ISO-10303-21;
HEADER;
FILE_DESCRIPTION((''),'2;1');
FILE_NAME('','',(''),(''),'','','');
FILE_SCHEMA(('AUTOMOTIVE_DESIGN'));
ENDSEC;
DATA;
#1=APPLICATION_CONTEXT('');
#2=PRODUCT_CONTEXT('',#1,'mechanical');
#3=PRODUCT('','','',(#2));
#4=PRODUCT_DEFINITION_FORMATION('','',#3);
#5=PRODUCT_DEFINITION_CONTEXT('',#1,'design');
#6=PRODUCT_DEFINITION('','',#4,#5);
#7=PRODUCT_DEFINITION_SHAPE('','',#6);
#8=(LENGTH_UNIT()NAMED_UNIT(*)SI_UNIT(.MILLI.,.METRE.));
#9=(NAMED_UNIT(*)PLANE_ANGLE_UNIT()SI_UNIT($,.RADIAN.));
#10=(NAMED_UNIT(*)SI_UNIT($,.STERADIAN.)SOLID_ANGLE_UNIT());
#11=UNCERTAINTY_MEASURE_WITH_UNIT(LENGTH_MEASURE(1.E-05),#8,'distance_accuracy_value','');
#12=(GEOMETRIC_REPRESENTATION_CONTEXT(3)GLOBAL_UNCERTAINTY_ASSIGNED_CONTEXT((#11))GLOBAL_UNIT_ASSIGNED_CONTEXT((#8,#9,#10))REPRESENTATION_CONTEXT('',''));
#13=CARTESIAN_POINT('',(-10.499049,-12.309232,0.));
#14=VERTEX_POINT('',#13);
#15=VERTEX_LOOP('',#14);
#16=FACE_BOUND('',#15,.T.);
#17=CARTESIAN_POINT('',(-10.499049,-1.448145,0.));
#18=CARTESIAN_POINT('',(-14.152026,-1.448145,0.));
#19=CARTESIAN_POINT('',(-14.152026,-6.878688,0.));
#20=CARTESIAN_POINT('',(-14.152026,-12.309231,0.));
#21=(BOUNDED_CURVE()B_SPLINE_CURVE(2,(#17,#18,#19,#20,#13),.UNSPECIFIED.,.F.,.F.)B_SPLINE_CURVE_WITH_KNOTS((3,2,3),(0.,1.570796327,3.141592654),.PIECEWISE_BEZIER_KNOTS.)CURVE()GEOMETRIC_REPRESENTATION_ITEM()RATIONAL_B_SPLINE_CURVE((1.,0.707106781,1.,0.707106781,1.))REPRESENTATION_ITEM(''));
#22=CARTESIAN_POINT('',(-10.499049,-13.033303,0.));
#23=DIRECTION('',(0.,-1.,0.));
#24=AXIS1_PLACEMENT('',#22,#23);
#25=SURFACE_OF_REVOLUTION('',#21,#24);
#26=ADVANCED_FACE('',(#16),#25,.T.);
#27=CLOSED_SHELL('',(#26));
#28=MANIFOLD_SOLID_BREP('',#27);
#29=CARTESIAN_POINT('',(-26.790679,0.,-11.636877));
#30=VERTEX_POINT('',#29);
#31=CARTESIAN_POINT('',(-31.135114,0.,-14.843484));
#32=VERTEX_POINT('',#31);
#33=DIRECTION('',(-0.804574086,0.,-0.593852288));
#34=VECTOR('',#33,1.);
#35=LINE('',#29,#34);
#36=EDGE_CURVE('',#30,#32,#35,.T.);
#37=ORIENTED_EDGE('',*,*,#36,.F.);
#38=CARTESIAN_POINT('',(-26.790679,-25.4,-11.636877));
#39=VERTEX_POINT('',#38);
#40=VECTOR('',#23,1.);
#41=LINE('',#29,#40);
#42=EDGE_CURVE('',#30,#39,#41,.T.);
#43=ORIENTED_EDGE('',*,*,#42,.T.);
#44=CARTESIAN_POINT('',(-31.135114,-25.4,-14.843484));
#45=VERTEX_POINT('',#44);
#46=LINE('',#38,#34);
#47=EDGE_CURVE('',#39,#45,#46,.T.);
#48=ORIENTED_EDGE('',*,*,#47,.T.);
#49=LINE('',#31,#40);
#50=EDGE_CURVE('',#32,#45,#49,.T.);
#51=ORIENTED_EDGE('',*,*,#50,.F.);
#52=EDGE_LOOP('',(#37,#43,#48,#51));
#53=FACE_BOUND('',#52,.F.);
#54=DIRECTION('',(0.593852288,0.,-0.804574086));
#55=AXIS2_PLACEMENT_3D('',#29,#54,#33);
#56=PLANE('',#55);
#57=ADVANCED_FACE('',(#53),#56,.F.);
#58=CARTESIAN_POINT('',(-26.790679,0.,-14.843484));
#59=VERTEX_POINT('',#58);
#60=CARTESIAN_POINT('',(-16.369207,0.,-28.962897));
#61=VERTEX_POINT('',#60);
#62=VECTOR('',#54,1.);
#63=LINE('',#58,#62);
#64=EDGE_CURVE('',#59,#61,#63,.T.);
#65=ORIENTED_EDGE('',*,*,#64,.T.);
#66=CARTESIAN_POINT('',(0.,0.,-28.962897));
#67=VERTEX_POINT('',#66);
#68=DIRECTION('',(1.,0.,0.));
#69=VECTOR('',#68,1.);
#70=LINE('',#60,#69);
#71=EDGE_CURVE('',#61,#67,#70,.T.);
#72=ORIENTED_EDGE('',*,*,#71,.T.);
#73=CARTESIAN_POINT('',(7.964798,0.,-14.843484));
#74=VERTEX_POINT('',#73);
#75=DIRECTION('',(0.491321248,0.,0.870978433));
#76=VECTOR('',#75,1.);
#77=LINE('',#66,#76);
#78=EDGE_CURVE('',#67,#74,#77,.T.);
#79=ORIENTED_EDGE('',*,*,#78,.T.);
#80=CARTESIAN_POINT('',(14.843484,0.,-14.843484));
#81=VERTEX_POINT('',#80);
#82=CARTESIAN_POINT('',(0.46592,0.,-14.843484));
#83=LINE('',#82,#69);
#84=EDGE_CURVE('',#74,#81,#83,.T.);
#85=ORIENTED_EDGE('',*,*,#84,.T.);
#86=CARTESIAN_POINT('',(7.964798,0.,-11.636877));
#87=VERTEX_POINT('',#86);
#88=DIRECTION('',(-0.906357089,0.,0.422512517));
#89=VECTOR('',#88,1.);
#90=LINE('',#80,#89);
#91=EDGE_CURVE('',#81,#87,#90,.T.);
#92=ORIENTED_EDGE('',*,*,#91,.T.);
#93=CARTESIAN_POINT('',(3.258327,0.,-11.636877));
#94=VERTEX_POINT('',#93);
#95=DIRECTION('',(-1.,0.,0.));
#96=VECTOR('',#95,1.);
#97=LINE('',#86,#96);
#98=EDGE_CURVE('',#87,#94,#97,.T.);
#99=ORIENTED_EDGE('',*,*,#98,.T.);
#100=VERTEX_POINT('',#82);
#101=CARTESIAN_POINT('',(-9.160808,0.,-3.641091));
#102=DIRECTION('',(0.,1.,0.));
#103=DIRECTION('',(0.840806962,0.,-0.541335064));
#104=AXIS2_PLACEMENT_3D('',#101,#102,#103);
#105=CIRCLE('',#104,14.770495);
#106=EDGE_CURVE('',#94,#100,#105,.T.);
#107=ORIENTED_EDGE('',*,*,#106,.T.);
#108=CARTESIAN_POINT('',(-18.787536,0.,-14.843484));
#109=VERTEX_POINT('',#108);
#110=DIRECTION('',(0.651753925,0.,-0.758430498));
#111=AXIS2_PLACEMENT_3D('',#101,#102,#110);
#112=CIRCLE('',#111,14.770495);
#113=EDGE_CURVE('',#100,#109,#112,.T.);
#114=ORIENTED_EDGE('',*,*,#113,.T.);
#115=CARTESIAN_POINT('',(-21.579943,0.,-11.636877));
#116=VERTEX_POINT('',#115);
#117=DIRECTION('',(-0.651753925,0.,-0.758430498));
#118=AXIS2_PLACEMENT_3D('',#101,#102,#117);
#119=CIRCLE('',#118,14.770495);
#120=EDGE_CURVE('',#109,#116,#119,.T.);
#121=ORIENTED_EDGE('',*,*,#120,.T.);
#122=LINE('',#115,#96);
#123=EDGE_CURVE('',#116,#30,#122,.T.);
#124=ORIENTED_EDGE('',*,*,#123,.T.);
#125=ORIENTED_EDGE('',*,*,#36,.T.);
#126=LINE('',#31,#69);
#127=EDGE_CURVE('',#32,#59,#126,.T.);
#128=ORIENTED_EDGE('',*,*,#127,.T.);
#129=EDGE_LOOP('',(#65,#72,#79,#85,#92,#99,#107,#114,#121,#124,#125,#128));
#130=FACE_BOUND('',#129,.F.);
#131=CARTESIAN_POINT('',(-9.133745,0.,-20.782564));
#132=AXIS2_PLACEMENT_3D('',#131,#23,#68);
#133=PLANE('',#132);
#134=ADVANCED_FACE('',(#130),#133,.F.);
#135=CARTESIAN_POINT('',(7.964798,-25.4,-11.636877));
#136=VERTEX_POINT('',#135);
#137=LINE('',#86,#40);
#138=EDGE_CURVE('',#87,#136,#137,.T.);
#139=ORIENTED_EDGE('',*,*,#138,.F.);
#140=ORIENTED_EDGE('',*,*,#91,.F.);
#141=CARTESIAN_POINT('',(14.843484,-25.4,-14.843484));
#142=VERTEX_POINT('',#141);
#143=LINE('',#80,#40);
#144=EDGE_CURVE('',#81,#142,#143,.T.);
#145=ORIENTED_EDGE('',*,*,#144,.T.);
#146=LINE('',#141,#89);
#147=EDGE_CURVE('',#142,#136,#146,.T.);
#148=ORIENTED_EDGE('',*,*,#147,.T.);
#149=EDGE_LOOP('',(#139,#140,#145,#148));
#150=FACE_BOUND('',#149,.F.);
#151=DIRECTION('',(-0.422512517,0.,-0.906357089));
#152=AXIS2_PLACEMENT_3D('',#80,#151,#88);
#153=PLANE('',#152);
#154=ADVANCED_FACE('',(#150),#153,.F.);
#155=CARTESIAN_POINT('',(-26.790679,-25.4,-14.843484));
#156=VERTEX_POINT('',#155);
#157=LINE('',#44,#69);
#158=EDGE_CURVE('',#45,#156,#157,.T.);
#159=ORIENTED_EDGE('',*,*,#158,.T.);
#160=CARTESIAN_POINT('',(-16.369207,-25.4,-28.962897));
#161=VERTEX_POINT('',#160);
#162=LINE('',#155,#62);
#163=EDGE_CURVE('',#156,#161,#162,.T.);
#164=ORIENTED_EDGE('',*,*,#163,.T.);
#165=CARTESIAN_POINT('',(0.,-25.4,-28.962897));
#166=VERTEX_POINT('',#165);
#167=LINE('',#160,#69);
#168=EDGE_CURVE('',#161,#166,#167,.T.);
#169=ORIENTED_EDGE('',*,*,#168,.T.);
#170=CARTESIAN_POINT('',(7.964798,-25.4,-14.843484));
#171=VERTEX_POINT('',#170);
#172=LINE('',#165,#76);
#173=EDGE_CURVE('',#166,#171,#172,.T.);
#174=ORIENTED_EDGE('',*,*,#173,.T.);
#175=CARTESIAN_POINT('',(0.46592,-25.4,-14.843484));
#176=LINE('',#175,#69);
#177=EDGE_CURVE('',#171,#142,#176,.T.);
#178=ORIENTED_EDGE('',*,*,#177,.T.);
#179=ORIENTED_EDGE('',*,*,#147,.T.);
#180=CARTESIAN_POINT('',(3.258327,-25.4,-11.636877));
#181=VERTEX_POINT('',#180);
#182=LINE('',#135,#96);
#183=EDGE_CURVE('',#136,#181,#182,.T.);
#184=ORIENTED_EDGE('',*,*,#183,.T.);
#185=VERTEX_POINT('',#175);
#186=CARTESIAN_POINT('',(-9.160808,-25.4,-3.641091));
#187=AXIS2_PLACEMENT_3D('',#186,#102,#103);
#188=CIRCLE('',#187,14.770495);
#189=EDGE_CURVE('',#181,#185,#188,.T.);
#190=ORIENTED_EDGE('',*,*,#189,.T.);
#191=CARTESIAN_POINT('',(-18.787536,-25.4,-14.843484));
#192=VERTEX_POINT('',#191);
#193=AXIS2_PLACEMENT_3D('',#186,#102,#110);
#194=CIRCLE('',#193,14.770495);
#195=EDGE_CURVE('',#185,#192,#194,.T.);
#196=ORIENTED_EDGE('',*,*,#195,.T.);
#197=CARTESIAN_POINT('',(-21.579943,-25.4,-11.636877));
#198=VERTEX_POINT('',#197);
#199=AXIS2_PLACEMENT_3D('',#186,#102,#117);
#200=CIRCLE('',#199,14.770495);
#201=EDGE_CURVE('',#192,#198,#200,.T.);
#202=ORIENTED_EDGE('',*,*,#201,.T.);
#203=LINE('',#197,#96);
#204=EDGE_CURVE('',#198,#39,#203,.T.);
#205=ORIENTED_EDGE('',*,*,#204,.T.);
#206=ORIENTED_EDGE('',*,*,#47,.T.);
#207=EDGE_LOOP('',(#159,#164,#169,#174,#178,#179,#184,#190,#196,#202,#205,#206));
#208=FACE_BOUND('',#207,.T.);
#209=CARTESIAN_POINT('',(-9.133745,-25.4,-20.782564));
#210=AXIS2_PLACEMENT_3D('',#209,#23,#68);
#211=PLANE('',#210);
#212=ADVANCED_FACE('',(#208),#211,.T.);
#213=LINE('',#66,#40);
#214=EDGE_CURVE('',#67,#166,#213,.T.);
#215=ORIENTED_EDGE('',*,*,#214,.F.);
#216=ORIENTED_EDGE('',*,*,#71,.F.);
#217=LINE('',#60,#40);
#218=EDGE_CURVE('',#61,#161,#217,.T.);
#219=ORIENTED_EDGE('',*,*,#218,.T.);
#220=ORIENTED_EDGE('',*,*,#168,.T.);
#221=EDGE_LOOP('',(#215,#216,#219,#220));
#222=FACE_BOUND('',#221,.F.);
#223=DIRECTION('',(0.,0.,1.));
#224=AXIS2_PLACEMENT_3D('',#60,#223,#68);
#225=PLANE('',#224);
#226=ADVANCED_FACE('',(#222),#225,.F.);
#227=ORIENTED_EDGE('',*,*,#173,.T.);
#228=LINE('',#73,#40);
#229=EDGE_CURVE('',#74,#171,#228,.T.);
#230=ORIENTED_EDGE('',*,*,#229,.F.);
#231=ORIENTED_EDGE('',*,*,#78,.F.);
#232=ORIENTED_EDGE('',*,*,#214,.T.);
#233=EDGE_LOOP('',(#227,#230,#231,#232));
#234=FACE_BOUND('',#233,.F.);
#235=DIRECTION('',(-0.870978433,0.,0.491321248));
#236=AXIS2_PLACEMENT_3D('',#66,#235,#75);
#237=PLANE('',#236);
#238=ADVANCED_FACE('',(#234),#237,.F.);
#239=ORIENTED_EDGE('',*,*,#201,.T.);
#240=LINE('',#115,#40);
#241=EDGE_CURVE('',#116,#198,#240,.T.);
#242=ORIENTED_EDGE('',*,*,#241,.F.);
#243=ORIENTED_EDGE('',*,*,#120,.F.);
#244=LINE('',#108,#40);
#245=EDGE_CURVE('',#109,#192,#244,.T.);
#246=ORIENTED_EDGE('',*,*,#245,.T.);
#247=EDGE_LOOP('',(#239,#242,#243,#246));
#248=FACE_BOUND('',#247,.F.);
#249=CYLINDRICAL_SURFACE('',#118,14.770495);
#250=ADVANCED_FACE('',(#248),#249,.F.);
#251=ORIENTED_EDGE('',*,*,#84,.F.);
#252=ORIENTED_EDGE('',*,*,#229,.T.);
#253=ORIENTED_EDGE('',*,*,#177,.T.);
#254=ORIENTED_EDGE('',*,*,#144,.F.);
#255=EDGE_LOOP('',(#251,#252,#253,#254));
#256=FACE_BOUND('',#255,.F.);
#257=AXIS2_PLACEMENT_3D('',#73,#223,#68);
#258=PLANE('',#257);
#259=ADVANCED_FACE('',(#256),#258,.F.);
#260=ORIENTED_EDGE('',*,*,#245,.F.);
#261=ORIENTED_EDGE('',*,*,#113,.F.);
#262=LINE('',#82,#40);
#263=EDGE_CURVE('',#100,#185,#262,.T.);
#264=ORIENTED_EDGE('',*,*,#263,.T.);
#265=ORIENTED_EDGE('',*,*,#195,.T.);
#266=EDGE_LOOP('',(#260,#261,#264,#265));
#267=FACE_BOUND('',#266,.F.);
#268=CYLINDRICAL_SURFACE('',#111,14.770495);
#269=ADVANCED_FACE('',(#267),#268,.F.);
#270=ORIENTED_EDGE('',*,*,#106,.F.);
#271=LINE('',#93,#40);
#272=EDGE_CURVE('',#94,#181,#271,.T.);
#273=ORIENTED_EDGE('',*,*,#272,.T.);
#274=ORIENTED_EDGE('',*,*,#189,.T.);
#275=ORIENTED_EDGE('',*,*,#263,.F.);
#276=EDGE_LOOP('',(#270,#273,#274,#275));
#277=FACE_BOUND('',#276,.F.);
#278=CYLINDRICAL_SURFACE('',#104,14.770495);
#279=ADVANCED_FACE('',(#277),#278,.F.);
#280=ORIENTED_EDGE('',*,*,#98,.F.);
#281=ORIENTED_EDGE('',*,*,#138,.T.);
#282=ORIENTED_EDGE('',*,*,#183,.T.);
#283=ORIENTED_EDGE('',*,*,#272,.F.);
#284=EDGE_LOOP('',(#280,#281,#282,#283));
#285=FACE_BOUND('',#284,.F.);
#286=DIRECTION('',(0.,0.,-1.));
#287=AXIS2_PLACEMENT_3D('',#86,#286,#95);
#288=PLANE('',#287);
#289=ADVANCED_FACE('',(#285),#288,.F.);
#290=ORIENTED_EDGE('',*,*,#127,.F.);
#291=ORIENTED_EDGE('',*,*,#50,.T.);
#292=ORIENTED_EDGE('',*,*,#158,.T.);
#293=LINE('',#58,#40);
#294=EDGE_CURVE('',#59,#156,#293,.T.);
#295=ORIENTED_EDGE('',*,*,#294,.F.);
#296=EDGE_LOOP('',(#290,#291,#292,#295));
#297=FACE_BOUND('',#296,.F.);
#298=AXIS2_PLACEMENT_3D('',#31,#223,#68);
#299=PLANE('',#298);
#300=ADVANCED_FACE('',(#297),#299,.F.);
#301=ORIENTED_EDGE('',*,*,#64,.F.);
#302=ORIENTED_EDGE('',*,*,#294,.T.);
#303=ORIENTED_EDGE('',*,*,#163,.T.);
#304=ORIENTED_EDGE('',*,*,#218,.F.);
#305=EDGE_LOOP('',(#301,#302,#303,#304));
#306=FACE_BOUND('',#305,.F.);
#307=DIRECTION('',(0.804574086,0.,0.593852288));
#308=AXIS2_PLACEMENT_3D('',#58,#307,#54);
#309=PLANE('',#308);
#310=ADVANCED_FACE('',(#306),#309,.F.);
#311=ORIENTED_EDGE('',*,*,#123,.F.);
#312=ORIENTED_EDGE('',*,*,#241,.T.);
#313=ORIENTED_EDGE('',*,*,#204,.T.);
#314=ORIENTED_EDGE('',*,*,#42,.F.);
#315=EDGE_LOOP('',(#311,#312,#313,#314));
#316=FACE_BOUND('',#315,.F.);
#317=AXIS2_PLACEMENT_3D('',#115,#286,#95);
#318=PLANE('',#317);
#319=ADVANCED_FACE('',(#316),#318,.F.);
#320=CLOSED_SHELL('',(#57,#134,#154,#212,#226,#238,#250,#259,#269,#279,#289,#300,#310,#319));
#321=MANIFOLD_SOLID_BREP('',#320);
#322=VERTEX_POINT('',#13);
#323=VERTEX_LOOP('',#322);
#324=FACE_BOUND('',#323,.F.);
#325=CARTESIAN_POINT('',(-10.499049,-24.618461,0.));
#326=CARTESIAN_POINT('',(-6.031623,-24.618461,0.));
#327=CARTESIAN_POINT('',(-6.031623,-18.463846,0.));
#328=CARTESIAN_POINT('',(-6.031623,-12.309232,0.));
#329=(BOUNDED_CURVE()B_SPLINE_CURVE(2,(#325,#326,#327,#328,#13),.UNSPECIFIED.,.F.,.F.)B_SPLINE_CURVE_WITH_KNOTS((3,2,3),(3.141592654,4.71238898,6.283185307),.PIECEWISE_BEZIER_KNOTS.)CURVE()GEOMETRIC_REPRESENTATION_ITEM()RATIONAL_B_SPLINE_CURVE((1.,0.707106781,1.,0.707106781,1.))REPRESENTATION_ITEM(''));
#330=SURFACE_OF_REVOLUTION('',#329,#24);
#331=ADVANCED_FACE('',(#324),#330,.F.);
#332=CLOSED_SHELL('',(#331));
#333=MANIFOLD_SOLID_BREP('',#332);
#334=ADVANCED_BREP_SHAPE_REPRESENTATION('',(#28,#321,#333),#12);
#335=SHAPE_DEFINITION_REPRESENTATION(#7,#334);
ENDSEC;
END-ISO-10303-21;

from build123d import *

# Parameters (mm, degrees)
F1_DEPTH = 25.4


# Not quite as in the source:
# - ends of sketch curves that miss each other by under 0.0002 mm in the source are joined


with BuildPart() as f1:
    # F0 (on Front) → F1 (new body)
    with BuildSketch(Plane.XZ):
        with BuildLine():
            Line((-18.7875360372, -14.8434843868), (-26.7906785011, -14.8434843868))
            Line((-26.7906785011, -14.8434843868), (-16.3692074327, -28.9628971368))
            Line((-16.3692074327, -28.9628971368), (0, -28.9628971368))
            Line((0, -28.9628971368), (7.9647982493, -14.8434843868))
            Line((7.9647982493, -14.8434843868), (0.4659200925, -14.8434843868))
            ThreePointArc((0.4659200925, -14.8434843868), (-9.1608079724, -18.4115854923), (-18.7875360372, -14.8434843868))
        make_face()
        with BuildLine():
            Line((-31.1351139098, -14.8434843868), (-26.7906785011, -14.8434843868))
            Line((-26.7906785011, -14.8434843868), (-18.7875360372, -14.8434843868))
            ThreePointArc((-18.7875360372, -14.8434843868), (-20.2997307946, -13.3411894824), (-21.5799429669, -11.6368773754))
            Line((-21.5799429669, -11.6368773754), (-26.7906785011, -11.6368773754))
            Line((-26.7906785011, -11.6368773754), (-31.1351139098, -14.8434843868))
        make_face()
        with BuildLine():
            ThreePointArc((3.2583270222, -11.6368773754), (1.9781148499, -13.3411894824), (0.4659200925, -14.8434843868))
            Line((0.4659200925, -14.8434843868), (7.9647982493, -14.8434843868))
            Line((7.9647982493, -14.8434843868), (14.8434843868, -14.8434843868))
            Line((14.8434843868, -14.8434843868), (7.9647982493, -11.6368773754))
            Line((7.9647982493, -11.6368773754), (3.2583270222, -11.6368773754))
        make_face()
    extrude(amount=F1_DEPTH)


with BuildPart() as f3:
    # F2 (on Top) → F3 (revolve)
    with BuildSketch(Plane.XY):
        with BuildLine():
            Line((-10.4990489781, -12.3092317954), (-10.4990489781, -1.4481449034))
            add(Edge.make_bspline(
                [(-10.4990489781, -1.4481449034), (-14.1520259814, -1.4481449034), (-14.1520259814, -6.8786880001), (-14.1520259814, -12.3092310969), (-10.4990489781, -12.3092317954)],
                knots=[0, 0, 0, 1.5707963268, 1.5707963268, 3.1415926536, 3.1415926536, 3.1415926536], degree=2, weights=[1, 0.7071067812, 1, 0.7071067812, 1]))
        make_face()
    revolve(axis=Axis((-10.4990489781, -13.0333028501, 0), (0, -1, 0)))


with BuildPart() as f3b:
    # F2 (on Top) → F3, piece 2 (revolve)
    with BuildSketch(Plane.XY):
        with BuildLine():
            add(Edge.make_bspline(
                [(-10.4990489781, -24.6184607968), (-6.0316230931, -24.6184607968), (-6.0316230931, -18.4638462961), (-6.0316230931, -12.3092317954), (-10.4990489781, -12.3092317954)],
                knots=[3.1415926536, 3.1415926536, 3.1415926536, 4.7123889804, 4.7123889804, 6.2831853072, 6.2831853072, 6.2831853072], degree=2, weights=[1, 0.7071067812, 1, 0.7071067812, 1]))
            Line((-10.4990489781, -12.3092317954), (-10.4990489781, -24.6184607968))
        make_face()
    revolve(axis=Axis((-10.4990489781, -13.0333028501, 0), (0, -1, 0)))


solid = Compound([f1.part, f3.part, f3b.part])
